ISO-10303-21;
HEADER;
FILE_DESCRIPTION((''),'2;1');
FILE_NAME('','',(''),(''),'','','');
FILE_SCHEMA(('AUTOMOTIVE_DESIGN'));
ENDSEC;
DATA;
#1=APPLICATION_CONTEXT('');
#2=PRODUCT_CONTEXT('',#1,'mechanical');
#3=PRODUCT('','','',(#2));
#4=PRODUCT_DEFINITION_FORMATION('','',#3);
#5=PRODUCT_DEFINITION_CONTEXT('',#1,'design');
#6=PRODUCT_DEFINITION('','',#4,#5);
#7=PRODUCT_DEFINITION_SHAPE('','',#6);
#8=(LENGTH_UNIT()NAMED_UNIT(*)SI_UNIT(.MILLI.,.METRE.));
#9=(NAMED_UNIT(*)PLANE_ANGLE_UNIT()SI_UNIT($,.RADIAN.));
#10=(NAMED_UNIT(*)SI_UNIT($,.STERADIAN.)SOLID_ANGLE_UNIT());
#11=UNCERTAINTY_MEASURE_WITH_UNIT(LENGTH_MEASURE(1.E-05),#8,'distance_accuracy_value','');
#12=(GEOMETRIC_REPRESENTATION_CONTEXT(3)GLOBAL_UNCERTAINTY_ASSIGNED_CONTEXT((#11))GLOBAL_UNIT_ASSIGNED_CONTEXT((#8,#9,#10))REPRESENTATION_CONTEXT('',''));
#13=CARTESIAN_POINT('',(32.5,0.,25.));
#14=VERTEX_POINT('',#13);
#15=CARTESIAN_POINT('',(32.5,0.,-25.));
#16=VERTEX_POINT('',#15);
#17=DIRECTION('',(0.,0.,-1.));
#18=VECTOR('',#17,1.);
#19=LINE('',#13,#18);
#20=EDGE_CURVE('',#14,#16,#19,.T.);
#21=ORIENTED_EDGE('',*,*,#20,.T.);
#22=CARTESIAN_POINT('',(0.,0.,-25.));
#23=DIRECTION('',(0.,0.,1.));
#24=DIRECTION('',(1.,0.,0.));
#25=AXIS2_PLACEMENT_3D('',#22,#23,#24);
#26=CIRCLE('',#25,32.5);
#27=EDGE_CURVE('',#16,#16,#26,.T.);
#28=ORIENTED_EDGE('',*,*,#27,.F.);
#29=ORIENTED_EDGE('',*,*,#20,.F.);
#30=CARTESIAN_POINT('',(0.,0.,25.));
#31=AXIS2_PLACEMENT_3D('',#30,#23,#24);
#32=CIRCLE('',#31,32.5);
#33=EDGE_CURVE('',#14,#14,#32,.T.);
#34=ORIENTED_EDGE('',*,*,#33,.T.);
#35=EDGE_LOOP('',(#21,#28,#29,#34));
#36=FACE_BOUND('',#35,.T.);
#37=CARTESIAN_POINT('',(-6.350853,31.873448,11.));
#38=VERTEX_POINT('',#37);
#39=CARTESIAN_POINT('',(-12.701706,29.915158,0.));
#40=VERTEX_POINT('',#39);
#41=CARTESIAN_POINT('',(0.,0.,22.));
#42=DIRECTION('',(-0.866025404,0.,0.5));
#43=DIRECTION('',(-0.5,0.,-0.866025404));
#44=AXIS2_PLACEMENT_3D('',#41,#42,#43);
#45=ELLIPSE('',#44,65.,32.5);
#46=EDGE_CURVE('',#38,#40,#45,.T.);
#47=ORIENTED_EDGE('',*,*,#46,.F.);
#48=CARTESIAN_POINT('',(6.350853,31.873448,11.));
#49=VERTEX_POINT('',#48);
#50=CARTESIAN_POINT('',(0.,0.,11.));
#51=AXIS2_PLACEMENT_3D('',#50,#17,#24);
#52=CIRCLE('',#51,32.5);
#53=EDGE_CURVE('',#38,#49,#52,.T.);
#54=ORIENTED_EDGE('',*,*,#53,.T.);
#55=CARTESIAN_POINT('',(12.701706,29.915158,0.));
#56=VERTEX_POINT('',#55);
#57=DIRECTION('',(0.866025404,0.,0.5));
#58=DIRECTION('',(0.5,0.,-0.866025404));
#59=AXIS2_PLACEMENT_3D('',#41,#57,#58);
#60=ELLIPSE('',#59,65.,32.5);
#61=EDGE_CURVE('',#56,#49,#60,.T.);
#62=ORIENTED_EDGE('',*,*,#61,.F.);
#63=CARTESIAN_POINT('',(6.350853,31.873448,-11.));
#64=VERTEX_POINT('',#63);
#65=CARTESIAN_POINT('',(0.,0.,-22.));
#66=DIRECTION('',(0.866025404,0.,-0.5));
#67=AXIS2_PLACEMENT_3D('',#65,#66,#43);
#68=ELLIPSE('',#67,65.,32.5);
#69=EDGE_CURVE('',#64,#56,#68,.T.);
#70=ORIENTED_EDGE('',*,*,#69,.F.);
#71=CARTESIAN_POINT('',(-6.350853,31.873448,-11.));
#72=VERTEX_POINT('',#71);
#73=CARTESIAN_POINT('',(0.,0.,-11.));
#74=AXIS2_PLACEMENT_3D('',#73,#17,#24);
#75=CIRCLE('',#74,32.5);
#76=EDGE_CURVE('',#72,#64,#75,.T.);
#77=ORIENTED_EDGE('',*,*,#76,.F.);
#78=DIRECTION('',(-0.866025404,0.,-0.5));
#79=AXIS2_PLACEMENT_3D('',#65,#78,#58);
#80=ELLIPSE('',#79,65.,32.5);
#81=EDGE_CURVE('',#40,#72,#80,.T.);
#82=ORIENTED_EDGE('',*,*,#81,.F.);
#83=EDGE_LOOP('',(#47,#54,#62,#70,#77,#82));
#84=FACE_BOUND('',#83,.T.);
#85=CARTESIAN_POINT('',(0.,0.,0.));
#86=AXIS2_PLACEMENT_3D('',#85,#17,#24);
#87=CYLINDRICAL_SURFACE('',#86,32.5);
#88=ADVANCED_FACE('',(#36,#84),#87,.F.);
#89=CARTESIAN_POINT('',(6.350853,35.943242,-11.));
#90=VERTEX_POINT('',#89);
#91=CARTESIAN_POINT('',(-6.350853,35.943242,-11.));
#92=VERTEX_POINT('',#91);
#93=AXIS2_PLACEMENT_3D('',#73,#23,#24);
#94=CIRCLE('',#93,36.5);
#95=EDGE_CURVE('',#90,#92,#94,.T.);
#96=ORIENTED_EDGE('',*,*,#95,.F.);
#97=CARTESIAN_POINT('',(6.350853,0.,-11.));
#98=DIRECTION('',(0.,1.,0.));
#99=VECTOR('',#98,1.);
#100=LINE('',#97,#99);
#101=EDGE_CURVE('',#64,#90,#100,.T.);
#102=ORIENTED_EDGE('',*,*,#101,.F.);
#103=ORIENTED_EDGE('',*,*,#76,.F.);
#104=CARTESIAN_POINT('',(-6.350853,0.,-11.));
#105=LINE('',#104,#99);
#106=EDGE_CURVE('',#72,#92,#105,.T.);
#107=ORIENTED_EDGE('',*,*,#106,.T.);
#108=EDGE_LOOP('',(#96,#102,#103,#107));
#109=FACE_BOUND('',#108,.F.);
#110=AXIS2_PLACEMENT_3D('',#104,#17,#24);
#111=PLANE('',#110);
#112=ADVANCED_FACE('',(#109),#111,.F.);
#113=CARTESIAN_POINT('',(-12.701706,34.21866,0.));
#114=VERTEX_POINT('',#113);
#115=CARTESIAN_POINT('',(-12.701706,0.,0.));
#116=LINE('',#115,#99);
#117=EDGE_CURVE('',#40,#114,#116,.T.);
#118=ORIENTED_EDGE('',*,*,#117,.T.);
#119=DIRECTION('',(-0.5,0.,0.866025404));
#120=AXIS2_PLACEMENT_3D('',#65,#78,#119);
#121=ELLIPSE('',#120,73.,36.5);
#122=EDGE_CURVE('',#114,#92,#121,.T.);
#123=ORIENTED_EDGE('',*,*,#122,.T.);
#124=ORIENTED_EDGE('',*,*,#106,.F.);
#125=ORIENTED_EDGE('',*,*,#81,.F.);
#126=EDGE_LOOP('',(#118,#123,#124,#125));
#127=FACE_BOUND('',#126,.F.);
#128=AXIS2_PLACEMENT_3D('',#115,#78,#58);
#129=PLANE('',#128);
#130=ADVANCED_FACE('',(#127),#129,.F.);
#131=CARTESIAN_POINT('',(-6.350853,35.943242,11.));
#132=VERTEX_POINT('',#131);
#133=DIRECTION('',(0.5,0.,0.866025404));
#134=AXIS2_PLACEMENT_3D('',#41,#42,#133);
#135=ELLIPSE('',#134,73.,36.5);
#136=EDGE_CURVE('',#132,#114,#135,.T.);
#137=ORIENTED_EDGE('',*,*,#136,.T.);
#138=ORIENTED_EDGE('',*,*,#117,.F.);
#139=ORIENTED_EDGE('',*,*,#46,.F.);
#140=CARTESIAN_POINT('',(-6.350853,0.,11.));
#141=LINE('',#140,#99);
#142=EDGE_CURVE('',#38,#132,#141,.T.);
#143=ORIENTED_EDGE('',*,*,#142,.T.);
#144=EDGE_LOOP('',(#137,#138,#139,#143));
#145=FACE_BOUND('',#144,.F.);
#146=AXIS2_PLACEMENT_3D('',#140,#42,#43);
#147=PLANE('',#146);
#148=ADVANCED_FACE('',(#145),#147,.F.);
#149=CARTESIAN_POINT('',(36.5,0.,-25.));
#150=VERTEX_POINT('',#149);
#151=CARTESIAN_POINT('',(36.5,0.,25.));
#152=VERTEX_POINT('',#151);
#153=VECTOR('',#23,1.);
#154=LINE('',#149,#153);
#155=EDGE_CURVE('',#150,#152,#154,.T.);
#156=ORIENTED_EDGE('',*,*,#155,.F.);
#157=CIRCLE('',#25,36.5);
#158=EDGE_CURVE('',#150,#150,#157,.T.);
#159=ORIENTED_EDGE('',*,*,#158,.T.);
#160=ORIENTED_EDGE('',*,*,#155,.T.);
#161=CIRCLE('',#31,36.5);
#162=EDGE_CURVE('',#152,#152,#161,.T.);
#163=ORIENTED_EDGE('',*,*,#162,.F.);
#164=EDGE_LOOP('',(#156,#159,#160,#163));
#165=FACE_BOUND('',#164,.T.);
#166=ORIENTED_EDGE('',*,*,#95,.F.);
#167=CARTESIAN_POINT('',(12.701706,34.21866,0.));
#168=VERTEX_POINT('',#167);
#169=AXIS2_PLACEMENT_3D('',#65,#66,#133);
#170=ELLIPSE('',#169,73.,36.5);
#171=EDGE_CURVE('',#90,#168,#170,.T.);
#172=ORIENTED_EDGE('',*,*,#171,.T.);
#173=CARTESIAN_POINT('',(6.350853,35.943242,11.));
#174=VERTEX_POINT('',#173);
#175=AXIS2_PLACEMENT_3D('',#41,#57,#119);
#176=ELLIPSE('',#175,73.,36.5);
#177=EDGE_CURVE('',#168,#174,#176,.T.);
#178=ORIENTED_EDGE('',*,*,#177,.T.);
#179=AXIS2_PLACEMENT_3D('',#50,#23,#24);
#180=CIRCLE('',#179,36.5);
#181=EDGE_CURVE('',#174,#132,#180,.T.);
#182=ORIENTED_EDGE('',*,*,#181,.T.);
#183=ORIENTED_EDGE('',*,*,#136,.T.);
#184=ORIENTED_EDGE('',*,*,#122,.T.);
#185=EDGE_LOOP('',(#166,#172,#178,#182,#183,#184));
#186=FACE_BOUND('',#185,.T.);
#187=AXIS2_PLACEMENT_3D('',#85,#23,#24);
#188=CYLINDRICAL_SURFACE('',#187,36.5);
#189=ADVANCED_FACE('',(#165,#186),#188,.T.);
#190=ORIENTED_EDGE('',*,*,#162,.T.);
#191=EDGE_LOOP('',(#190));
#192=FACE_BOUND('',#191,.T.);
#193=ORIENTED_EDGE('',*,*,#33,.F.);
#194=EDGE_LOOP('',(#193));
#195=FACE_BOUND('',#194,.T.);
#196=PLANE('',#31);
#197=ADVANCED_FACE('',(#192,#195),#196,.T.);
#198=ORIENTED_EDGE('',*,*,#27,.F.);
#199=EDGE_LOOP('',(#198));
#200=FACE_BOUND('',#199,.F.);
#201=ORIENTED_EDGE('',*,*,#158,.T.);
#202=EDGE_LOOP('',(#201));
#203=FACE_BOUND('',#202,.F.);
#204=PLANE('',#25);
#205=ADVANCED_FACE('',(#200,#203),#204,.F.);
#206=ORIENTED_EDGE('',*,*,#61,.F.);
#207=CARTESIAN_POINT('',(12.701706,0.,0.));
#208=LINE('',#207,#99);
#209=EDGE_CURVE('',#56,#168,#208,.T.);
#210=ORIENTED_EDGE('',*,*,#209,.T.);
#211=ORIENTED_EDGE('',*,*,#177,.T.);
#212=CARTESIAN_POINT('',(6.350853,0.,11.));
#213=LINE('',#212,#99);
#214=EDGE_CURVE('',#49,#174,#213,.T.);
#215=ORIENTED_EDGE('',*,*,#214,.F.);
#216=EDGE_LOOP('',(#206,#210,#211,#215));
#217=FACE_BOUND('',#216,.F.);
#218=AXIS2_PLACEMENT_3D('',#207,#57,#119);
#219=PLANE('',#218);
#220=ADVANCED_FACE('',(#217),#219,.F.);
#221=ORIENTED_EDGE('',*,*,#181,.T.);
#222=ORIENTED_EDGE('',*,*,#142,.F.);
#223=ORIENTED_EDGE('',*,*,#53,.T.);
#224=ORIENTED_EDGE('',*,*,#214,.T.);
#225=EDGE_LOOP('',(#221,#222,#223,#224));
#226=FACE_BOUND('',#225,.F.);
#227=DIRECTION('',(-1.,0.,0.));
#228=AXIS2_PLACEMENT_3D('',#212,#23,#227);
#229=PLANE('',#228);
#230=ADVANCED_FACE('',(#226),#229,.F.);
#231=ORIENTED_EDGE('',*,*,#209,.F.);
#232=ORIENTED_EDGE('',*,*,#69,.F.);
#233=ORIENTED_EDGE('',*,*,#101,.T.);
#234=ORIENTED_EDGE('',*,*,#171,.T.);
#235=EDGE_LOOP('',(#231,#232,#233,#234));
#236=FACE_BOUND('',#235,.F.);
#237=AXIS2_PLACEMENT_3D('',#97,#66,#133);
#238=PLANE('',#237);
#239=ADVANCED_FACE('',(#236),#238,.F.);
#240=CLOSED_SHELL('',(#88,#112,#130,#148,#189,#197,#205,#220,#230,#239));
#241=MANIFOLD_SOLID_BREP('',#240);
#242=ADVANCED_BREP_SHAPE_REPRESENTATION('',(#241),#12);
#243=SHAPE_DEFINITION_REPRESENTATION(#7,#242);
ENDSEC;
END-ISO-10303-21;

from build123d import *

# Parameters (mm, degrees)
F0_R     = 36.5
F0_R_2   = 32.5
F1_DEPTH = 25
F3_DEPTH = 40


# Not quite as in the source:
# - a feature names something its author has since deleted; it is built from what else it names


with BuildPart() as f1:
    # F0 (on Top) → F1 (new body, symmetric)
    with BuildSketch(Plane.XY):
        Circle(F0_R)
        Circle(F0_R_2, mode=Mode.SUBTRACT)
    extrude(amount=F1_DEPTH, both=True)

    # F2 (on Front) → F3 (cut)
    with BuildSketch(Plane.XZ):
        Polygon((-6.3508529611, -11), (6.3508529611, -11), (12.7017059222, 0), (6.3508529611, 11), (-6.3508529611, 11), (-12.7017059222, 0), align=None)
    extrude(amount=-F3_DEPTH, mode=Mode.SUBTRACT)


solid = f1.part
